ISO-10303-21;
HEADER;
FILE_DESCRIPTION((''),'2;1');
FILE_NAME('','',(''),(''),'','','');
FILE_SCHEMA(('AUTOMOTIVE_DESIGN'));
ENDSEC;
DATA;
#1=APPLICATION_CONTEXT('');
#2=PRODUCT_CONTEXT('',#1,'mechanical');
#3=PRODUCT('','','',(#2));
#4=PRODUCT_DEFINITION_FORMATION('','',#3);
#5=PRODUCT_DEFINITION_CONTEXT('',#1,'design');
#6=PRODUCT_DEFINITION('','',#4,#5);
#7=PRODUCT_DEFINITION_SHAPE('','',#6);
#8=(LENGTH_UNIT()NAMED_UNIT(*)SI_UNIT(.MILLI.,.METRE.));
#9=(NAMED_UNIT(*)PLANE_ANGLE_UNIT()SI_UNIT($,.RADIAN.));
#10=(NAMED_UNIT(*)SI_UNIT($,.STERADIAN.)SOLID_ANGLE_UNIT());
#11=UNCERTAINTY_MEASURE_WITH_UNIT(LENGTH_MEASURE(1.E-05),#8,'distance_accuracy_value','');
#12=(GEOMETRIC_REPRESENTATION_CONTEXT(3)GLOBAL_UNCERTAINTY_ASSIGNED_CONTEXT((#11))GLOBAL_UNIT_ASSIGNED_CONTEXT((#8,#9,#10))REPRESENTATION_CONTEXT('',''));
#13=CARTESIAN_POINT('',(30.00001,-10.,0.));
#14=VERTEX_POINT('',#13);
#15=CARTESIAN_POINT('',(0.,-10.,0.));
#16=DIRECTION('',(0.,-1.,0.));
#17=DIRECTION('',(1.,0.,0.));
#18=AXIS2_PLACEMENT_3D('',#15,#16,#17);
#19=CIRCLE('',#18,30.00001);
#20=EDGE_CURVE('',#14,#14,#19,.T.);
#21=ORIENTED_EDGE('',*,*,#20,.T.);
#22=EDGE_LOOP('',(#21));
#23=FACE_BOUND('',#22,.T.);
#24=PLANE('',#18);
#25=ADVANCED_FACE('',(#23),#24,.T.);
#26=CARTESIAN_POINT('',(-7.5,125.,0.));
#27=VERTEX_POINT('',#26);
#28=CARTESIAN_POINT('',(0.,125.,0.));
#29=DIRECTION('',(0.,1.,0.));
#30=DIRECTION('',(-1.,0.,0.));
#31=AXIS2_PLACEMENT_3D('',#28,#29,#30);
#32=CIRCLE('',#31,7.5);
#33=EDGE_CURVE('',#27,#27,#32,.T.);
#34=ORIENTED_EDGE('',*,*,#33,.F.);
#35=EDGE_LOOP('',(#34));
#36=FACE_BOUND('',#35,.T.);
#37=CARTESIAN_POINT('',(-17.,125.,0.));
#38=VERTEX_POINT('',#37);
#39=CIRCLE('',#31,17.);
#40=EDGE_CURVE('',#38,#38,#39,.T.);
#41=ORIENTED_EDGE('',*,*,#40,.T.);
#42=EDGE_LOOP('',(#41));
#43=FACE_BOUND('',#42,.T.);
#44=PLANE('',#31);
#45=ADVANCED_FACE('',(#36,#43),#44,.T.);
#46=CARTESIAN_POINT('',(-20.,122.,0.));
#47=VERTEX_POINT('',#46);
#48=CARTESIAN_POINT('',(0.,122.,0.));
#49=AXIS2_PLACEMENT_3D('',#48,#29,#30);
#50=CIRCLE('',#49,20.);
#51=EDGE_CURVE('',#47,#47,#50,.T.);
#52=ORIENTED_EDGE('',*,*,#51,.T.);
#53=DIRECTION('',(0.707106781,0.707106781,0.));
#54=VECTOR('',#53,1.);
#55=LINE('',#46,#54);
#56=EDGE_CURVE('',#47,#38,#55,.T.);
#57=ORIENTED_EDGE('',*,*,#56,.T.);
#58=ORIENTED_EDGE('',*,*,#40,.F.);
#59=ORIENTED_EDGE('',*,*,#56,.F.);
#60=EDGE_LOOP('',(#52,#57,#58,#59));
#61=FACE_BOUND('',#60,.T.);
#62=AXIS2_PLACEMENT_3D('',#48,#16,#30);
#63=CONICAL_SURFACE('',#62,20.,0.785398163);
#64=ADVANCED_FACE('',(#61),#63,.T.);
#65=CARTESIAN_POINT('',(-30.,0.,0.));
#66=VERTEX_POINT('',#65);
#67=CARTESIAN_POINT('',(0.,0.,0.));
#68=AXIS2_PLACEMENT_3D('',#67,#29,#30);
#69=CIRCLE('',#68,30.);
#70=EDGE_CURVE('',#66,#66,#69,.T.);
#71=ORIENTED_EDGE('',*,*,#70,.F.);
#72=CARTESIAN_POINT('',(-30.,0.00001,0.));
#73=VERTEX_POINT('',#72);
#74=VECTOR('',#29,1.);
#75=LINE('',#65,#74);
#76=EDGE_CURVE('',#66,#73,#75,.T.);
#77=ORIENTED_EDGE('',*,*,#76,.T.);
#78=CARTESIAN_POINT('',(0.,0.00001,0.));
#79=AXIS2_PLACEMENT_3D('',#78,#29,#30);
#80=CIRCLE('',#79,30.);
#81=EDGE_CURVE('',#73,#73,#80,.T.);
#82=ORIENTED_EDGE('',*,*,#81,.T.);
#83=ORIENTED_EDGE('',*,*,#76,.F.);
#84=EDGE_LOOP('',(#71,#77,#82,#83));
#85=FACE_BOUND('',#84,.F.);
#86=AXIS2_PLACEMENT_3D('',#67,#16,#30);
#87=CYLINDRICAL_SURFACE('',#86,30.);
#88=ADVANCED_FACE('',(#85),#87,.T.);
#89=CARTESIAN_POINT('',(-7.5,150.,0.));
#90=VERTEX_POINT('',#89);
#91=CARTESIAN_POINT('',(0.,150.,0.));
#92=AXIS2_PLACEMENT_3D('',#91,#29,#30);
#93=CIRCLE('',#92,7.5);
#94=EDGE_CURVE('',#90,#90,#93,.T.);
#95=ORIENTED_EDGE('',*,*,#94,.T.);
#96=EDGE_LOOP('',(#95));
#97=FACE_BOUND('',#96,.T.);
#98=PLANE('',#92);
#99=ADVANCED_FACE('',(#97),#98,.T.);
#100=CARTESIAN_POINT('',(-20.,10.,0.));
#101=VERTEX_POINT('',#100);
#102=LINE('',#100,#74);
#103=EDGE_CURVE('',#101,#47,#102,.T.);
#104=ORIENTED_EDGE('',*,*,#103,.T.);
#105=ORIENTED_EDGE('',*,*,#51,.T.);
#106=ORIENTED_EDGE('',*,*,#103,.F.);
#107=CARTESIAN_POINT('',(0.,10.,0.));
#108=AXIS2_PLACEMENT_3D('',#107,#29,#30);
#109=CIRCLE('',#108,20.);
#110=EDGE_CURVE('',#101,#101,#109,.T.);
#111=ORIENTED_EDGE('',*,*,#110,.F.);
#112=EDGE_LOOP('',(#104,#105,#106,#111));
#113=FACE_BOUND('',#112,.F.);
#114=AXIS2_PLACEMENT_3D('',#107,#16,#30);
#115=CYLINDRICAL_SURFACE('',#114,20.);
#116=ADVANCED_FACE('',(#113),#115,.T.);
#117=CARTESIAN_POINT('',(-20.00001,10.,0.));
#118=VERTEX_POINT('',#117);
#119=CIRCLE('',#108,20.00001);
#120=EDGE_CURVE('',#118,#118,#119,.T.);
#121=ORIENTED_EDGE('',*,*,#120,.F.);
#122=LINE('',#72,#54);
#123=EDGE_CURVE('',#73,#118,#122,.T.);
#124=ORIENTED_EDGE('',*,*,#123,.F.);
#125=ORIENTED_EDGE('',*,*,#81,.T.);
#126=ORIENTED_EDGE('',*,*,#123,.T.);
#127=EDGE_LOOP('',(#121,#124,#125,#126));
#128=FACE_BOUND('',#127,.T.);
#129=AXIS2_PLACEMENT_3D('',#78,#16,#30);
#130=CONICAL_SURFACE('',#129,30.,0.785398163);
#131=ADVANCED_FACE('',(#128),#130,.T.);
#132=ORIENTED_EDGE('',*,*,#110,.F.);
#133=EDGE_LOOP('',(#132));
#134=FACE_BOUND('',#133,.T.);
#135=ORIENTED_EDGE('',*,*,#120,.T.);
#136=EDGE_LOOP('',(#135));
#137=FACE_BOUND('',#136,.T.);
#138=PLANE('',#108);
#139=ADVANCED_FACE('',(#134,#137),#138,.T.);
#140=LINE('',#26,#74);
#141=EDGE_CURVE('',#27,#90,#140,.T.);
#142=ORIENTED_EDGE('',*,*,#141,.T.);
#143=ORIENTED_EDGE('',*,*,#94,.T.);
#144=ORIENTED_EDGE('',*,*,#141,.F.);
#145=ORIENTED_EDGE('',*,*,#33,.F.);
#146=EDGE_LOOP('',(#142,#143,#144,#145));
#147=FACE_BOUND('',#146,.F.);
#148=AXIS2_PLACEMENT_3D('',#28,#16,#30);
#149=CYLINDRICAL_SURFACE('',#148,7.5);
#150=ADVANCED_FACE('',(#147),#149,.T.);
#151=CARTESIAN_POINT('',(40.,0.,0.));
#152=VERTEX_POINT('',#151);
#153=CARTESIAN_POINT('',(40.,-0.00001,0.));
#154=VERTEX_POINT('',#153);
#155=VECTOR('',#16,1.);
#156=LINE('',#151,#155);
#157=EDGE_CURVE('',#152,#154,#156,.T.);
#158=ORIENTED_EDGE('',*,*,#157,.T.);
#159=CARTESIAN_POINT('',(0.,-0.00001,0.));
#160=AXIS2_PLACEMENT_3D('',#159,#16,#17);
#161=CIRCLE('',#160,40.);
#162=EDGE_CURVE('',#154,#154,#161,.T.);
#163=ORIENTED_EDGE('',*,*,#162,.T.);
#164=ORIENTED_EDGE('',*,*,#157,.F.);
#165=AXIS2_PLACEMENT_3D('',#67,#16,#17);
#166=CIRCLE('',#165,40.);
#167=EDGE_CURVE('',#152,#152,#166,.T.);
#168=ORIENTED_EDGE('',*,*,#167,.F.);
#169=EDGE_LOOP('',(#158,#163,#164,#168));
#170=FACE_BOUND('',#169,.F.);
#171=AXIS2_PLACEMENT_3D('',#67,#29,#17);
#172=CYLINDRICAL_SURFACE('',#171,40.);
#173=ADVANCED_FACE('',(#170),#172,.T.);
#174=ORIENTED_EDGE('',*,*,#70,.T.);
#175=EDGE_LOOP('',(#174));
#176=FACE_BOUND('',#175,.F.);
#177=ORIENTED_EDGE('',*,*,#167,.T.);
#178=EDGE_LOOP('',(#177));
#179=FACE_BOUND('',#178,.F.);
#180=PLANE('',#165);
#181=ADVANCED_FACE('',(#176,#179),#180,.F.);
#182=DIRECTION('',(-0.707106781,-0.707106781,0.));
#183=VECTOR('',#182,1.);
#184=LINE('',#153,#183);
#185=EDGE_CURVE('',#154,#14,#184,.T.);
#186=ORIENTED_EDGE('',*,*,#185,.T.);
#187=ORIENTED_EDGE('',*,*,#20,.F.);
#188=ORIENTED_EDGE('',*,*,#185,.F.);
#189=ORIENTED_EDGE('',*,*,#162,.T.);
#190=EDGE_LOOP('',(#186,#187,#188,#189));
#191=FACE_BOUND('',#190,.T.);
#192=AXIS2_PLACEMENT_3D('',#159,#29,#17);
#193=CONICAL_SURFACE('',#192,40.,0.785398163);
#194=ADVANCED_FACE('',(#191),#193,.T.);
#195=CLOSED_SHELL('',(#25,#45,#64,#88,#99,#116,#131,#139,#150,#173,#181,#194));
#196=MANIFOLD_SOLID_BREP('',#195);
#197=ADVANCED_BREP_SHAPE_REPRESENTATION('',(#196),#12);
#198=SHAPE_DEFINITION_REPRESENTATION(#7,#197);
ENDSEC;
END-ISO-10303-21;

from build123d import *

# Parameters (mm, degrees)
F0_R      = 40
F1_DEPTH  = 10
F3_SIZE   = 9.99999
F2_R      = 30
F4_DEPTH  = 10
F5_SIZE   = 9.99999
F6_R      = 20
F7_DEPTH  = 115
F8_SIZE   = 3
F9_R      = 7.5
F10_DEPTH = 25


# Not quite as in the source:
# - a fillet or chamfer is up to 0.001 mm smaller than in the source, because OpenCascade refuses the exact size


with BuildPart() as f1:
    # F0 (on Front) → F1 (new body)
    with BuildSketch(Plane.XZ):
        Circle(F0_R)
    extrude(amount=F1_DEPTH)

    # F3 (size 10 in the source; OpenCascade refuses exactly that, so slightly less here)
    f3_edges = [f1.edges().sort_by_distance(p)[0] for p in [
        (-40, -10, 0),
    ]]
    chamfer(f3_edges, length=F3_SIZE)

    # F2 (on face) → F4 (join)
    with BuildSketch(Plane(origin=(0, 0, 0), x_dir=(-1, 0, 0), z_dir=(0, 1, 0))):
        Circle(F2_R)
    extrude(amount=F4_DEPTH)

    # F5 (size 10 in the source; OpenCascade refuses exactly that, so slightly less here)
    f5_edges = [f1.edges().sort_by_distance(p)[0] for p in [
        (30, 10, 0),
    ]]
    chamfer(f5_edges, length=F5_SIZE)

    # F6 (on face) → F7 (join)
    with BuildSketch(Plane(origin=(0, 10, 0), x_dir=(-1, 0, 0), z_dir=(0, 1, 0))):
        Circle(F6_R)
    extrude(amount=F7_DEPTH)

    # F8
    f8_edges = [f1.edges().sort_by_distance(p)[0] for p in [
        (20, 125, 0),
    ]]
    chamfer(f8_edges, length=F8_SIZE)

    # F9 (on face) → F10 (join)
    with BuildSketch(Plane(origin=(0, 125, 0), x_dir=(-1, 0, 0), z_dir=(0, 1, 0))):
        Circle(F9_R)
    extrude(amount=F10_DEPTH)


solid = f1.part
